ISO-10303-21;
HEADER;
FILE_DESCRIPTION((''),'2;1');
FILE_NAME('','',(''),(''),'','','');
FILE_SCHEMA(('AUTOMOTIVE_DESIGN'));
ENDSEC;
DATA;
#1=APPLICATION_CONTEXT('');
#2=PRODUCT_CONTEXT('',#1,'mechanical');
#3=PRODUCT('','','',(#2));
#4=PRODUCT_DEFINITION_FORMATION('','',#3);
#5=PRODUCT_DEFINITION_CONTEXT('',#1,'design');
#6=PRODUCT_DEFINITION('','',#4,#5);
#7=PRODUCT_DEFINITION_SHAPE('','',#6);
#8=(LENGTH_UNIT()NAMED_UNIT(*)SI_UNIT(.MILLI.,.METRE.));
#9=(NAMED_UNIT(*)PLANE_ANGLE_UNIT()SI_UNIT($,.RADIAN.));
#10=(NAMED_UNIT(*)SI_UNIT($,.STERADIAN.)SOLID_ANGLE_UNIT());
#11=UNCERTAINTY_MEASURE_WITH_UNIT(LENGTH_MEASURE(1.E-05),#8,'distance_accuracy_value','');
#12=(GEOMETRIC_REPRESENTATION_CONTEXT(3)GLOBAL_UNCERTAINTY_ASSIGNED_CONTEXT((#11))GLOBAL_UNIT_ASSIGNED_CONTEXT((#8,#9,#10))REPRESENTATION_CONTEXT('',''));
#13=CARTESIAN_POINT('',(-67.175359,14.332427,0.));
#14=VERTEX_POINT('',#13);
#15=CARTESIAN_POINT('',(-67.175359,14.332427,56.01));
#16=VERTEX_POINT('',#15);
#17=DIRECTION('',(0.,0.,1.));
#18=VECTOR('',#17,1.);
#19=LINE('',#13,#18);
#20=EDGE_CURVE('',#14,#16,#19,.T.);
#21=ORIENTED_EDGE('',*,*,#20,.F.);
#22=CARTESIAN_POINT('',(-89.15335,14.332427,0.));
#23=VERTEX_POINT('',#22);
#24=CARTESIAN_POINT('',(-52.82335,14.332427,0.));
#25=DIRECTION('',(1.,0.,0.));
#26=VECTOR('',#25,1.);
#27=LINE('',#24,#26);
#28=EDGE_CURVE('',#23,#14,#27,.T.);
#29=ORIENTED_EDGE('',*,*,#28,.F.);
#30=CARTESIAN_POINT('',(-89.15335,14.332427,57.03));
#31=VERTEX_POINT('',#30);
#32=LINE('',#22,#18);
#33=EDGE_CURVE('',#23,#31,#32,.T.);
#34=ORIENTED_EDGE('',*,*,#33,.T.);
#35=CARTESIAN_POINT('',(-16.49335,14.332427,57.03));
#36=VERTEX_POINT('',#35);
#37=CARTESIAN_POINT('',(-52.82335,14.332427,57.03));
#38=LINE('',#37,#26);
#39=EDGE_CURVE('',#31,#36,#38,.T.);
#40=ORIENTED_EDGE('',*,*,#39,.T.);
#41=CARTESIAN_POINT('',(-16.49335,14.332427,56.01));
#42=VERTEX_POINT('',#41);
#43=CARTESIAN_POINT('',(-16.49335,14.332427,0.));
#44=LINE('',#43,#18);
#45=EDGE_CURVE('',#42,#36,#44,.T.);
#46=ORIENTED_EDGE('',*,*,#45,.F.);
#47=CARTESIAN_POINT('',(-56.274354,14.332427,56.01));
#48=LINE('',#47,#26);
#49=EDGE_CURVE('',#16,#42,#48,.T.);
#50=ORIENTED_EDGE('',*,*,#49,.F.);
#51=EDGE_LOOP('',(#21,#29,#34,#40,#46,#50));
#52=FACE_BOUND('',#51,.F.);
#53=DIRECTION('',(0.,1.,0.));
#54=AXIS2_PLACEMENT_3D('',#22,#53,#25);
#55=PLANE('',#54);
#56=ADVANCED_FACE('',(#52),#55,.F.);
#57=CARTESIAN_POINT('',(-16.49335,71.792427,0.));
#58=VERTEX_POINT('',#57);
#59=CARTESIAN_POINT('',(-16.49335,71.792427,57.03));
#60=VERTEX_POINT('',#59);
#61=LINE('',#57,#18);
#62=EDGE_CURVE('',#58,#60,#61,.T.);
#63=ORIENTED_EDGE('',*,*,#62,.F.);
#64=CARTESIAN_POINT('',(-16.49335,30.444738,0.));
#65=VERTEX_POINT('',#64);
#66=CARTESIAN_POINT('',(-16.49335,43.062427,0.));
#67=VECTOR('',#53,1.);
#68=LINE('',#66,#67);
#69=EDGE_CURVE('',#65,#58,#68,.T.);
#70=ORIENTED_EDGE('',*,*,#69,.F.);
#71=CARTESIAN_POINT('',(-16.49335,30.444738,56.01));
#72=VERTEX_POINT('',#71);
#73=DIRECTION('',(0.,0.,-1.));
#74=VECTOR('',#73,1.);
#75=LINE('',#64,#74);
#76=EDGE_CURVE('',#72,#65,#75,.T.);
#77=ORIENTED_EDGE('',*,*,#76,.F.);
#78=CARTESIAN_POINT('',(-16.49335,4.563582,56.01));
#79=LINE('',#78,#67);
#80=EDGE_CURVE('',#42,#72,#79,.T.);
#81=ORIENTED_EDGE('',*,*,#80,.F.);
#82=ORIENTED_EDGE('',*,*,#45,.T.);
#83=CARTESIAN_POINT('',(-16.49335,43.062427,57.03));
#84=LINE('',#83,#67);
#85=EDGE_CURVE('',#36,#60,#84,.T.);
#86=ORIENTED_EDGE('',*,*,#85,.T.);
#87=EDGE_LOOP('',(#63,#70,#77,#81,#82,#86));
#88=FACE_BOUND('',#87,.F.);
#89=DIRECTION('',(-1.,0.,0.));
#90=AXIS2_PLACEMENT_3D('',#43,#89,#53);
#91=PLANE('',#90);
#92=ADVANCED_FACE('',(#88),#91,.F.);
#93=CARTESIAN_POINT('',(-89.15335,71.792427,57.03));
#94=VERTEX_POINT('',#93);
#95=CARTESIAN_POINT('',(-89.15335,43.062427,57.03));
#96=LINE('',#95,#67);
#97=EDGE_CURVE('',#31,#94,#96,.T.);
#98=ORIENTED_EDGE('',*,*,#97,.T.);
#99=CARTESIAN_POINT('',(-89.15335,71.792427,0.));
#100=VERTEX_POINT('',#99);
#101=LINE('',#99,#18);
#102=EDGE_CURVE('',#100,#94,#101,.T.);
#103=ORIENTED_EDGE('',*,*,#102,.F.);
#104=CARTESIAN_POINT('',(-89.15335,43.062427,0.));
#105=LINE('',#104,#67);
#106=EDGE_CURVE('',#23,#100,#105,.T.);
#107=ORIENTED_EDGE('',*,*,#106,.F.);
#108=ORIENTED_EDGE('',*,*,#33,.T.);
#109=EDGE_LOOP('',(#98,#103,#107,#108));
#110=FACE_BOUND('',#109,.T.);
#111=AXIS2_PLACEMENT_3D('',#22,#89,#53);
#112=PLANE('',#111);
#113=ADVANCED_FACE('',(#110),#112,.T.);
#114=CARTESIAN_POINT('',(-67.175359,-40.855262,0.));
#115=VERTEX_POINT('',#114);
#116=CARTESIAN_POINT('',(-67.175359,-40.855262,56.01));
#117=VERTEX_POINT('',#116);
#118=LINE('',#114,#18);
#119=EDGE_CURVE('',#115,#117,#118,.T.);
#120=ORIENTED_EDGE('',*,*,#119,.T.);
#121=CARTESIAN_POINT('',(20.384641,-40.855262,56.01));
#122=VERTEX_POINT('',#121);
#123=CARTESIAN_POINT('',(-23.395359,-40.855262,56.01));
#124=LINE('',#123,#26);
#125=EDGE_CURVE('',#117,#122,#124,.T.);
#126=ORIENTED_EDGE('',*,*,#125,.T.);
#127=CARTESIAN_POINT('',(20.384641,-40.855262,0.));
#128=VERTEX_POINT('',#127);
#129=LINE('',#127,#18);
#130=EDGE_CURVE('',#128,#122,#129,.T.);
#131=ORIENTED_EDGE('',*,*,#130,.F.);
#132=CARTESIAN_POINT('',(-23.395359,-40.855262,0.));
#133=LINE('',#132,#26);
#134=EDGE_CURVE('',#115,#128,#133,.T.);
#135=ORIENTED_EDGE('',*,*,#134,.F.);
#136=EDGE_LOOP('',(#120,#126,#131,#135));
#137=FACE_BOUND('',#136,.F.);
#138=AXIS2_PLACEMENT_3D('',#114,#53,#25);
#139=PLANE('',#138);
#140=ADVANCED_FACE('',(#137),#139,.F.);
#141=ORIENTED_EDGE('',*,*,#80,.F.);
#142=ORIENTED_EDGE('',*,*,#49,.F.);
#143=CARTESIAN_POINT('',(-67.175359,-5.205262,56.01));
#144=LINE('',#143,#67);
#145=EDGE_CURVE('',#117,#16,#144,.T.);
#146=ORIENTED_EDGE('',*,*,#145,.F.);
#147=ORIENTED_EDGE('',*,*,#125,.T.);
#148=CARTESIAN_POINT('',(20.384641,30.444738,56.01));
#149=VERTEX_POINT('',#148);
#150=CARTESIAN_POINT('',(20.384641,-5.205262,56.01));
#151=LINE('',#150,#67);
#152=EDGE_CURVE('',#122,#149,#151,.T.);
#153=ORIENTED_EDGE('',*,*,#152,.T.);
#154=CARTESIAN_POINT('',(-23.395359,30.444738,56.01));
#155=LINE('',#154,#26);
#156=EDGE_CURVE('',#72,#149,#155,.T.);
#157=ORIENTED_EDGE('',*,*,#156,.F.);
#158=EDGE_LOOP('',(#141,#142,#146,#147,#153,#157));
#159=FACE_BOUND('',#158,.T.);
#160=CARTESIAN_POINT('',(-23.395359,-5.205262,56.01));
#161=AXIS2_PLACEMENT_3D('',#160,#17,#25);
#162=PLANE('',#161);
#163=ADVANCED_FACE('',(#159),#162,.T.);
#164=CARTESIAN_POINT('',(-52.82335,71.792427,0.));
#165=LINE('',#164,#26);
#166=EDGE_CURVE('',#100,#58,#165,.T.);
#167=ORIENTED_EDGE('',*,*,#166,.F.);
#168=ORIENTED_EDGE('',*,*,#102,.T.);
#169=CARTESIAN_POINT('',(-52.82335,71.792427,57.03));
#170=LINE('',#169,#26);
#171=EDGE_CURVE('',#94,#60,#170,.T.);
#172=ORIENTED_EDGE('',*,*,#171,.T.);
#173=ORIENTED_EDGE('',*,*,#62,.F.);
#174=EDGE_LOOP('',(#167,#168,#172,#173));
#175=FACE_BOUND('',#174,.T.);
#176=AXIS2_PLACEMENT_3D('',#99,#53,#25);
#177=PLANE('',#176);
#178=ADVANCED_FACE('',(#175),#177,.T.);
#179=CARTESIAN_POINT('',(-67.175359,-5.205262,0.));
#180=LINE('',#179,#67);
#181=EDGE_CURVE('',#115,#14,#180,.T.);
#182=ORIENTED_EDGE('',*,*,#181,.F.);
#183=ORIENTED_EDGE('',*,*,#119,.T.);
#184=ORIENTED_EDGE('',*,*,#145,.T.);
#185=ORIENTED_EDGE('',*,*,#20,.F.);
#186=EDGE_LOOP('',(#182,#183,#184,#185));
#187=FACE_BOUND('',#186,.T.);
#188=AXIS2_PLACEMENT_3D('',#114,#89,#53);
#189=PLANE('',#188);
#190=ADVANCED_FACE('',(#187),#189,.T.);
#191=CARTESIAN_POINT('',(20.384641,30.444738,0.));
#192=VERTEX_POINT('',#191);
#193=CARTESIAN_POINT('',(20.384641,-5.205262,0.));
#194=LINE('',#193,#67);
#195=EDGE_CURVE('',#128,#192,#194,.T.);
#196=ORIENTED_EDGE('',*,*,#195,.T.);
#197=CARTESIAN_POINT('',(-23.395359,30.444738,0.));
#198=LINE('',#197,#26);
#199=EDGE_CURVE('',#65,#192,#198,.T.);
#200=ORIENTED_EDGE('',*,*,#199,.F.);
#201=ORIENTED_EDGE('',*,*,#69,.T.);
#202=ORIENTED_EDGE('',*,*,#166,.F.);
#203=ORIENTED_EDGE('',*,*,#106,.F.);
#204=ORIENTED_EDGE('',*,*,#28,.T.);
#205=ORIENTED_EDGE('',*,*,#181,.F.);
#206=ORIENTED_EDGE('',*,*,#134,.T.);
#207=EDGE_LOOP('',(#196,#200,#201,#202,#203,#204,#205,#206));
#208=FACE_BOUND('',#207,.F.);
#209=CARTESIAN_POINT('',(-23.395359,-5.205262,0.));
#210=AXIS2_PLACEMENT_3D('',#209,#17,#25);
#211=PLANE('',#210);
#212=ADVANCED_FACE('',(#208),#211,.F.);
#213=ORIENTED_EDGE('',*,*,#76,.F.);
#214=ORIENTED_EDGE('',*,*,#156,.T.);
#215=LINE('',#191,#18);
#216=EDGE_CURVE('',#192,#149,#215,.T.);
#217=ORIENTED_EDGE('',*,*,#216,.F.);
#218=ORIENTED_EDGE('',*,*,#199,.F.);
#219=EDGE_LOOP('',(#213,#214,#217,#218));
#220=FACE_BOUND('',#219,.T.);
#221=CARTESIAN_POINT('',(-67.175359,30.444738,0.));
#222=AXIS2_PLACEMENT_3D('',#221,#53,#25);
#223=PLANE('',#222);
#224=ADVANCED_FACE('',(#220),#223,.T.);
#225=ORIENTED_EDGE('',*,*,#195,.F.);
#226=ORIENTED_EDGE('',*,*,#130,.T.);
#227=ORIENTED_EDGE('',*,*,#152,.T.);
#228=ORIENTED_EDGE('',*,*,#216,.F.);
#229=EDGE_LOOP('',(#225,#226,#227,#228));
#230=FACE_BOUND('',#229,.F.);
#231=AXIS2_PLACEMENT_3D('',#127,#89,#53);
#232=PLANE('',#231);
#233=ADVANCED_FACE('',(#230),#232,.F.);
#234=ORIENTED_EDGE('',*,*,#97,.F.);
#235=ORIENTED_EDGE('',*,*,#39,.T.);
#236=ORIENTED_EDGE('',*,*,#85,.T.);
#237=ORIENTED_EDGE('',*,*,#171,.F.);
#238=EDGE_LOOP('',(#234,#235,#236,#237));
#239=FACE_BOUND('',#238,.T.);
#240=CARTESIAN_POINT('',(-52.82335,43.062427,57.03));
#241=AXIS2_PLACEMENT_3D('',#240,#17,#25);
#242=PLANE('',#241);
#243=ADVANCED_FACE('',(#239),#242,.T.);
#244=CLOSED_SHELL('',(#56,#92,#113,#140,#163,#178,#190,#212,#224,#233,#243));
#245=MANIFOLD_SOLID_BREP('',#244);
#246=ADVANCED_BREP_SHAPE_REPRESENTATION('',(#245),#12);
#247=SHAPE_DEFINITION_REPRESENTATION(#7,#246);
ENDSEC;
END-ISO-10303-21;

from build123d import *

# Parameters (mm, degrees)
F0_W     = 72.66
F0_H     = 57.46
F1_DEPTH = 57.03
F2_W     = 87.56
F2_H     = 71.3
F3_DEPTH = 56.01


# Not quite as in the source:
# - a feature names something its author has since deleted; it is built from what else it names


with BuildPart() as f1:
    # F0 (on Top) → F1 (new body)
    with BuildSketch(Plane.XY):
        with Locations((-52.8233502674, 43.0624267119)):
            Rectangle(F0_W, F0_H)
    extrude(amount=F1_DEPTH)

    # F2 (on Top) → F3 (join)
    with BuildSketch(Plane.XY):
        with Locations((-23.3953585339, -5.2052624285)):
            Rectangle(F2_W, F2_H)
    extrude(amount=F3_DEPTH)


solid = f1.part
